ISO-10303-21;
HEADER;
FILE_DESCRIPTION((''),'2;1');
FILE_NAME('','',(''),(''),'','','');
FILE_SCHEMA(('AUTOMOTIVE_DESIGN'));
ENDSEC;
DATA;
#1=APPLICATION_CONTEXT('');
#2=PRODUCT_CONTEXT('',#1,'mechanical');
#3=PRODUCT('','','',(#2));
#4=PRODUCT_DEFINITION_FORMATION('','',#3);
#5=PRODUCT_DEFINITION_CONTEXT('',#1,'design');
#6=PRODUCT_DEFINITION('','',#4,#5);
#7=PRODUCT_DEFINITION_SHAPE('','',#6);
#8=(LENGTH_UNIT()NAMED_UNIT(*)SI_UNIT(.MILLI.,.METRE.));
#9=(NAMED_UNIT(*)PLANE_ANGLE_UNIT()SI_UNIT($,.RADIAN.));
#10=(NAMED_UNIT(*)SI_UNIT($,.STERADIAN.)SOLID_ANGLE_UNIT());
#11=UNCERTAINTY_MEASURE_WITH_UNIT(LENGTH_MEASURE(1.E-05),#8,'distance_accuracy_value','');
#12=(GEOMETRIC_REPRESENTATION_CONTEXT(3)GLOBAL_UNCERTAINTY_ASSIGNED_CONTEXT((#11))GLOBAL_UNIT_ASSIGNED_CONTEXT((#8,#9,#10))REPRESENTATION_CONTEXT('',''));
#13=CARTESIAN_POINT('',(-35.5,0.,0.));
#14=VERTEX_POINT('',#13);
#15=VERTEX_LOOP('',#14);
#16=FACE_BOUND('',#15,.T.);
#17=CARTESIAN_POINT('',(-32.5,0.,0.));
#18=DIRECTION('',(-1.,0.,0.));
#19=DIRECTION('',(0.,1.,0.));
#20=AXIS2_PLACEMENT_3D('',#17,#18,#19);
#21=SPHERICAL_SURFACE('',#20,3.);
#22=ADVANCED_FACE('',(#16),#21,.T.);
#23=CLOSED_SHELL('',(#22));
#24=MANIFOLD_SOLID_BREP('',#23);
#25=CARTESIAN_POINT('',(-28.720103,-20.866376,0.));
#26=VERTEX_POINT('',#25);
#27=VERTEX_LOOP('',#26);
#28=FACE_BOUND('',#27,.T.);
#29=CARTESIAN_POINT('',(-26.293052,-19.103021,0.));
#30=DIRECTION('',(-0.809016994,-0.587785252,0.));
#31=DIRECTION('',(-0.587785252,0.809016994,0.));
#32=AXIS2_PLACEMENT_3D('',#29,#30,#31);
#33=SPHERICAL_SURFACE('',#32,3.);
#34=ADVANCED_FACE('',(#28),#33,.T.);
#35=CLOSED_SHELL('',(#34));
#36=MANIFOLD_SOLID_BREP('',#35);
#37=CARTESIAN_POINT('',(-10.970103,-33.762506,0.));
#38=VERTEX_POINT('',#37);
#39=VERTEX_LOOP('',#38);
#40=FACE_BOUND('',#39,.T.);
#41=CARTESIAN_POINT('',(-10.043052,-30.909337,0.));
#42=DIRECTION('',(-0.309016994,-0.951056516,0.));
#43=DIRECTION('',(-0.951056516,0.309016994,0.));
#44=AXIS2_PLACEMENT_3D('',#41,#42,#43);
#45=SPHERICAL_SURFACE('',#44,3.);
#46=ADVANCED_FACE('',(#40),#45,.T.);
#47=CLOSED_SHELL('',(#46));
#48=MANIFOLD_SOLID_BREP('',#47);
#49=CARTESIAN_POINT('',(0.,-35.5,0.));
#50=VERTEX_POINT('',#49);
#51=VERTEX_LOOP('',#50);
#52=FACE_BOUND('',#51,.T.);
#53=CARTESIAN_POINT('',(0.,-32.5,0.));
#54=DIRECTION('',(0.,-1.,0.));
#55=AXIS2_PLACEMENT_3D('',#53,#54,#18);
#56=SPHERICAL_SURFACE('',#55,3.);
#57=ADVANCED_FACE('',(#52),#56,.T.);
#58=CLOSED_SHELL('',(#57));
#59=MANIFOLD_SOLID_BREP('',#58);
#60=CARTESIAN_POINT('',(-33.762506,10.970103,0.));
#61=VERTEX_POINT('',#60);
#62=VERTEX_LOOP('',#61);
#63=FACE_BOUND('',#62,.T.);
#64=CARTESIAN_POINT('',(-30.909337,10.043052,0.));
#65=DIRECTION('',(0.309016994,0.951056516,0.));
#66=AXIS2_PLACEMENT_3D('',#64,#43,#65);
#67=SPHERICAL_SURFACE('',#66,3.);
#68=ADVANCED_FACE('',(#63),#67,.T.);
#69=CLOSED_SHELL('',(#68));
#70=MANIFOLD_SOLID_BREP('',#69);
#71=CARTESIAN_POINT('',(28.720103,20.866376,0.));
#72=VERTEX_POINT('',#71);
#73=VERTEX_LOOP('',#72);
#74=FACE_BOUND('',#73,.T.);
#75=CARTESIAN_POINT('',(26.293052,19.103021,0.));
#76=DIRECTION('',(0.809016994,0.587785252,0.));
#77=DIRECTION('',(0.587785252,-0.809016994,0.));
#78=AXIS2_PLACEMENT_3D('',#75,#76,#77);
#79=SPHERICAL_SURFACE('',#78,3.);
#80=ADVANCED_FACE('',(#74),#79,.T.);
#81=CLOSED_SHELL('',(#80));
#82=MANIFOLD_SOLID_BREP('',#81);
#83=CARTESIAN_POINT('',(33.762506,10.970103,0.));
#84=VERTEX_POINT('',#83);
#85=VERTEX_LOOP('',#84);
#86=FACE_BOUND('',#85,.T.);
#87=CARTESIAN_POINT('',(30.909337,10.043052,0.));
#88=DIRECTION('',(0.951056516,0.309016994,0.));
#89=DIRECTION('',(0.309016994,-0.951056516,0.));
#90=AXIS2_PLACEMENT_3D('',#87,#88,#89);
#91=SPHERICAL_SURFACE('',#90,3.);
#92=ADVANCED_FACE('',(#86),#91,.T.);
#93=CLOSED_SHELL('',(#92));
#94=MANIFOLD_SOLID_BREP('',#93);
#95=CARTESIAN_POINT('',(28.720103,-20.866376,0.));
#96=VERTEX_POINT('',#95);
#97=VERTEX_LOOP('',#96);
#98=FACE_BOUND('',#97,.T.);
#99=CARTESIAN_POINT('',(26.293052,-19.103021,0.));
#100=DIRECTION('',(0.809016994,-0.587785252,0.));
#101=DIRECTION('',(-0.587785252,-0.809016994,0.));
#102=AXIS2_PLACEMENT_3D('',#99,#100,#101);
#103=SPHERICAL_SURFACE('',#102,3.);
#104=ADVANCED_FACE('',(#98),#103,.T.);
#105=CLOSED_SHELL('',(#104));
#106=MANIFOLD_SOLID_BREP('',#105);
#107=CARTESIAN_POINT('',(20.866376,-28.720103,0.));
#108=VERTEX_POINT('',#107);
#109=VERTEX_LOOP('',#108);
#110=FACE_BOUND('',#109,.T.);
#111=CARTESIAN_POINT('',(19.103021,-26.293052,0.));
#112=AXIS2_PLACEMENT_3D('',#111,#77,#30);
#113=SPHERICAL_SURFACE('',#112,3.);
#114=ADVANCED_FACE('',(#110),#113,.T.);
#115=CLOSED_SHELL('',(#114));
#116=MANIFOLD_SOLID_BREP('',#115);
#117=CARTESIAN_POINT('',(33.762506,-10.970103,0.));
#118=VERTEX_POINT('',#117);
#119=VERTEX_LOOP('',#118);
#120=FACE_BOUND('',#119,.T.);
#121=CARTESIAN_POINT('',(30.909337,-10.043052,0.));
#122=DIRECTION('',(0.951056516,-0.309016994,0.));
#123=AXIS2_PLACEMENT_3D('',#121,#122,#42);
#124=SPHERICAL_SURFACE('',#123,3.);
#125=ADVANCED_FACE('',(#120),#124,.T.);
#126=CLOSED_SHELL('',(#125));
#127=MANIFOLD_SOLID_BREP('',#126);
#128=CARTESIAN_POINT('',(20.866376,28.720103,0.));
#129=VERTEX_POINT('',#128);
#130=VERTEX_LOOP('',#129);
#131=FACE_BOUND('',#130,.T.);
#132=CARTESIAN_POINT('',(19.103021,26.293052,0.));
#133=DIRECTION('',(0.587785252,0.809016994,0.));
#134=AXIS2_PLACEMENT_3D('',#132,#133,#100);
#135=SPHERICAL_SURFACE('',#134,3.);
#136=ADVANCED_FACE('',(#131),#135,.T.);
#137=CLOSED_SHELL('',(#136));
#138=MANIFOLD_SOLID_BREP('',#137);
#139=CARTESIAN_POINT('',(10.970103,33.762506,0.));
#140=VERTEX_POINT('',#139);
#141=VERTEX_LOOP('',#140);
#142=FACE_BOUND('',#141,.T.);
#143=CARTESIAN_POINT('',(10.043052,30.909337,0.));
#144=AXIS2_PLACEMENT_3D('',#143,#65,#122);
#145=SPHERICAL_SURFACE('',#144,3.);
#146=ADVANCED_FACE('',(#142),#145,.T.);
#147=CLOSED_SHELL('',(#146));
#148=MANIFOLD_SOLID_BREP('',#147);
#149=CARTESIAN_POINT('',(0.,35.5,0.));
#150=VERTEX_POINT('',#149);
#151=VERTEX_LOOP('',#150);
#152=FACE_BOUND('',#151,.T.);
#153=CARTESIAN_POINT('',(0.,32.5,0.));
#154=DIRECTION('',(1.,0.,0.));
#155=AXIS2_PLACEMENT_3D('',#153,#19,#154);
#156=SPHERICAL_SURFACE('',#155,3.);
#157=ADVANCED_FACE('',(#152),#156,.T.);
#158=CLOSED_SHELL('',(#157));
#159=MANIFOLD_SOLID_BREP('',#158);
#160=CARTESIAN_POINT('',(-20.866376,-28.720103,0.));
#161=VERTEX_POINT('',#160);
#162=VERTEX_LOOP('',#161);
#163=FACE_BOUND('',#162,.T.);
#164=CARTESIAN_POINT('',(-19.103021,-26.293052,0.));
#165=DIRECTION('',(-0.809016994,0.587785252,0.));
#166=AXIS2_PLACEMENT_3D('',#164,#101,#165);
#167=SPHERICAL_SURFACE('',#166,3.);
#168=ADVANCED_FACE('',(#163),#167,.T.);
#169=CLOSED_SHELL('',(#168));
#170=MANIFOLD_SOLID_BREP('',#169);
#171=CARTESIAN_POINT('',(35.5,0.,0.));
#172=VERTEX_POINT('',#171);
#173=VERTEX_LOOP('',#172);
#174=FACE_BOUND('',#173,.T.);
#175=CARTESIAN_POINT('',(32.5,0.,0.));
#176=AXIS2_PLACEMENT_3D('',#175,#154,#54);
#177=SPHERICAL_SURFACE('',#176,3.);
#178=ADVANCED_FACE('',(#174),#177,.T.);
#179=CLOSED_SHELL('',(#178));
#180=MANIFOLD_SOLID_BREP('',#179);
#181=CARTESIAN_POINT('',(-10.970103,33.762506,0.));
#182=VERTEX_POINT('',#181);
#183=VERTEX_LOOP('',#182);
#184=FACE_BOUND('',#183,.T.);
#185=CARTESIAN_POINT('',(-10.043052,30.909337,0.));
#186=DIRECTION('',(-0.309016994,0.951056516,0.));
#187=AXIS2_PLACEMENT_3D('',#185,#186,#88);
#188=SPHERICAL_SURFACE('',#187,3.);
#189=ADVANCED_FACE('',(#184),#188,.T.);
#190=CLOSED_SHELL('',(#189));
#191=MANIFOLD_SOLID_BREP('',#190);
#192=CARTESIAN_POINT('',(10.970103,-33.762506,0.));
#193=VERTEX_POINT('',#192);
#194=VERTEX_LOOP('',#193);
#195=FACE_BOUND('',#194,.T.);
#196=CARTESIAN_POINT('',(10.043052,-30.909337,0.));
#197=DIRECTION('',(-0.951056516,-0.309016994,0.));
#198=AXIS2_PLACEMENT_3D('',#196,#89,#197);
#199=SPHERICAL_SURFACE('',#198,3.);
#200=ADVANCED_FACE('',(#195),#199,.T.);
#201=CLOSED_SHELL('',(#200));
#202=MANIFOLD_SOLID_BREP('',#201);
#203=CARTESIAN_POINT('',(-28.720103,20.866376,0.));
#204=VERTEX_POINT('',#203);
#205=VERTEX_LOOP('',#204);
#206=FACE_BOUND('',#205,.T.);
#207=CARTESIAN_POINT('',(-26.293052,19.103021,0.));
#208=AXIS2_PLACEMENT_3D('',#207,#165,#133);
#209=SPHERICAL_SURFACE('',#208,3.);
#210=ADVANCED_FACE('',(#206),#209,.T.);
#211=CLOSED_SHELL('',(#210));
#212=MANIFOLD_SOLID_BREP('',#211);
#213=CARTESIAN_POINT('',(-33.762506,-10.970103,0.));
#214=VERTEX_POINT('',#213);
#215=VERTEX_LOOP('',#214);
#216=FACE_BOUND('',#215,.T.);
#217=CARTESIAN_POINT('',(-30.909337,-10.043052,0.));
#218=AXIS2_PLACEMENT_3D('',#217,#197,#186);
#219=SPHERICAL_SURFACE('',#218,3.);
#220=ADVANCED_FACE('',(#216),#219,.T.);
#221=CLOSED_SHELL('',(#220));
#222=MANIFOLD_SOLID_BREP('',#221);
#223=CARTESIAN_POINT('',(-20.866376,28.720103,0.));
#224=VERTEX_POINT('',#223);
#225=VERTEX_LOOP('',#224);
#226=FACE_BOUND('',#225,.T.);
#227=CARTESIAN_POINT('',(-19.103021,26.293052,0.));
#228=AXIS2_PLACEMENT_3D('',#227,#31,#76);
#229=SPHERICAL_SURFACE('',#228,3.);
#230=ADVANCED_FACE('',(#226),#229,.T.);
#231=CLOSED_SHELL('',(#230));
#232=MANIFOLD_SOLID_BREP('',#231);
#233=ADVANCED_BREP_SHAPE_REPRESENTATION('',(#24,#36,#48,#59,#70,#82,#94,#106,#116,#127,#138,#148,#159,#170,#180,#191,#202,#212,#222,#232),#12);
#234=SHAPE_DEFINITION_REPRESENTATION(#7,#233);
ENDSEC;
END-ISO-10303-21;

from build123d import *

# Parameters (mm, degrees)
CIRPATTERN1_COUNT = 20


with BuildPart() as part:
    # Sketch2 → Revolve1 (revolve)
    with BuildSketch(Plane.XY):
        with BuildLine():
            ThreePointArc((-29.5, 0), (-32.5, 3), (-35.5, 0))
            Line((-35.5, 0), (-29.5, 0))
        make_face()
    revolve(axis=Axis((-35.5, 0, 0), (1, 0, 0)))


with BuildPart() as cirpattern1_1:
    # CirPattern1: pattern copy
    add(part.part.rotate(Axis((0, 0, 0), (0, 0, 1)), 1 * 360 / CIRPATTERN1_COUNT))


with BuildPart() as cirpattern1_2:
    # CirPattern1: pattern copy
    add(part.part.rotate(Axis((0, 0, 0), (0, 0, 1)), 2 * 360 / CIRPATTERN1_COUNT))


with BuildPart() as cirpattern1_3:
    # CirPattern1: pattern copy
    add(part.part.rotate(Axis((0, 0, 0), (0, 0, 1)), 3 * 360 / CIRPATTERN1_COUNT))


with BuildPart() as cirpattern1_4:
    # CirPattern1: pattern copy
    add(part.part.rotate(Axis((0, 0, 0), (0, 0, 1)), 4 * 360 / CIRPATTERN1_COUNT))


with BuildPart() as cirpattern1_5:
    # CirPattern1: pattern copy
    add(part.part.rotate(Axis((0, 0, 0), (0, 0, 1)), 5 * 360 / CIRPATTERN1_COUNT))


with BuildPart() as cirpattern1_6:
    # CirPattern1: pattern copy
    add(part.part.rotate(Axis((0, 0, 0), (0, 0, 1)), 6 * 360 / CIRPATTERN1_COUNT))


with BuildPart() as cirpattern1_7:
    # CirPattern1: pattern copy
    add(part.part.rotate(Axis((0, 0, 0), (0, 0, 1)), 7 * 360 / CIRPATTERN1_COUNT))


with BuildPart() as cirpattern1_8:
    # CirPattern1: pattern copy
    add(part.part.rotate(Axis((0, 0, 0), (0, 0, 1)), 8 * 360 / CIRPATTERN1_COUNT))


with BuildPart() as cirpattern1_9:
    # CirPattern1: pattern copy
    add(part.part.rotate(Axis((0, 0, 0), (0, 0, 1)), 9 * 360 / CIRPATTERN1_COUNT))


with BuildPart() as cirpattern1_10:
    # CirPattern1: pattern copy
    add(part.part.rotate(Axis((0, 0, 0), (0, 0, 1)), 10 * 360 / CIRPATTERN1_COUNT))


with BuildPart() as cirpattern1_11:
    # CirPattern1: pattern copy
    add(part.part.rotate(Axis((0, 0, 0), (0, 0, 1)), 11 * 360 / CIRPATTERN1_COUNT))


with BuildPart() as cirpattern1_12:
    # CirPattern1: pattern copy
    add(part.part.rotate(Axis((0, 0, 0), (0, 0, 1)), 12 * 360 / CIRPATTERN1_COUNT))


with BuildPart() as cirpattern1_13:
    # CirPattern1: pattern copy
    add(part.part.rotate(Axis((0, 0, 0), (0, 0, 1)), 13 * 360 / CIRPATTERN1_COUNT))


with BuildPart() as cirpattern1_14:
    # CirPattern1: pattern copy
    add(part.part.rotate(Axis((0, 0, 0), (0, 0, 1)), 14 * 360 / CIRPATTERN1_COUNT))


with BuildPart() as cirpattern1_15:
    # CirPattern1: pattern copy
    add(part.part.rotate(Axis((0, 0, 0), (0, 0, 1)), 15 * 360 / CIRPATTERN1_COUNT))


with BuildPart() as cirpattern1_16:
    # CirPattern1: pattern copy
    add(part.part.rotate(Axis((0, 0, 0), (0, 0, 1)), 16 * 360 / CIRPATTERN1_COUNT))


with BuildPart() as cirpattern1_17:
    # CirPattern1: pattern copy
    add(part.part.rotate(Axis((0, 0, 0), (0, 0, 1)), 17 * 360 / CIRPATTERN1_COUNT))


with BuildPart() as cirpattern1_18:
    # CirPattern1: pattern copy
    add(part.part.rotate(Axis((0, 0, 0), (0, 0, 1)), 18 * 360 / CIRPATTERN1_COUNT))


with BuildPart() as cirpattern1_19:
    # CirPattern1: pattern copy
    add(part.part.rotate(Axis((0, 0, 0), (0, 0, 1)), 19 * 360 / CIRPATTERN1_COUNT))


solid = Compound([part.part, cirpattern1_1.part, cirpattern1_2.part, cirpattern1_3.part, cirpattern1_4.part, cirpattern1_5.part, cirpattern1_6.part, cirpattern1_7.part, cirpattern1_8.part, cirpattern1_9.part, cirpattern1_10.part, cirpattern1_11.part, cirpattern1_12.part, cirpattern1_13.part, cirpattern1_14.part, cirpattern1_15.part, cirpattern1_16.part, cirpattern1_17.part, cirpattern1_18.part, cirpattern1_19.part])
